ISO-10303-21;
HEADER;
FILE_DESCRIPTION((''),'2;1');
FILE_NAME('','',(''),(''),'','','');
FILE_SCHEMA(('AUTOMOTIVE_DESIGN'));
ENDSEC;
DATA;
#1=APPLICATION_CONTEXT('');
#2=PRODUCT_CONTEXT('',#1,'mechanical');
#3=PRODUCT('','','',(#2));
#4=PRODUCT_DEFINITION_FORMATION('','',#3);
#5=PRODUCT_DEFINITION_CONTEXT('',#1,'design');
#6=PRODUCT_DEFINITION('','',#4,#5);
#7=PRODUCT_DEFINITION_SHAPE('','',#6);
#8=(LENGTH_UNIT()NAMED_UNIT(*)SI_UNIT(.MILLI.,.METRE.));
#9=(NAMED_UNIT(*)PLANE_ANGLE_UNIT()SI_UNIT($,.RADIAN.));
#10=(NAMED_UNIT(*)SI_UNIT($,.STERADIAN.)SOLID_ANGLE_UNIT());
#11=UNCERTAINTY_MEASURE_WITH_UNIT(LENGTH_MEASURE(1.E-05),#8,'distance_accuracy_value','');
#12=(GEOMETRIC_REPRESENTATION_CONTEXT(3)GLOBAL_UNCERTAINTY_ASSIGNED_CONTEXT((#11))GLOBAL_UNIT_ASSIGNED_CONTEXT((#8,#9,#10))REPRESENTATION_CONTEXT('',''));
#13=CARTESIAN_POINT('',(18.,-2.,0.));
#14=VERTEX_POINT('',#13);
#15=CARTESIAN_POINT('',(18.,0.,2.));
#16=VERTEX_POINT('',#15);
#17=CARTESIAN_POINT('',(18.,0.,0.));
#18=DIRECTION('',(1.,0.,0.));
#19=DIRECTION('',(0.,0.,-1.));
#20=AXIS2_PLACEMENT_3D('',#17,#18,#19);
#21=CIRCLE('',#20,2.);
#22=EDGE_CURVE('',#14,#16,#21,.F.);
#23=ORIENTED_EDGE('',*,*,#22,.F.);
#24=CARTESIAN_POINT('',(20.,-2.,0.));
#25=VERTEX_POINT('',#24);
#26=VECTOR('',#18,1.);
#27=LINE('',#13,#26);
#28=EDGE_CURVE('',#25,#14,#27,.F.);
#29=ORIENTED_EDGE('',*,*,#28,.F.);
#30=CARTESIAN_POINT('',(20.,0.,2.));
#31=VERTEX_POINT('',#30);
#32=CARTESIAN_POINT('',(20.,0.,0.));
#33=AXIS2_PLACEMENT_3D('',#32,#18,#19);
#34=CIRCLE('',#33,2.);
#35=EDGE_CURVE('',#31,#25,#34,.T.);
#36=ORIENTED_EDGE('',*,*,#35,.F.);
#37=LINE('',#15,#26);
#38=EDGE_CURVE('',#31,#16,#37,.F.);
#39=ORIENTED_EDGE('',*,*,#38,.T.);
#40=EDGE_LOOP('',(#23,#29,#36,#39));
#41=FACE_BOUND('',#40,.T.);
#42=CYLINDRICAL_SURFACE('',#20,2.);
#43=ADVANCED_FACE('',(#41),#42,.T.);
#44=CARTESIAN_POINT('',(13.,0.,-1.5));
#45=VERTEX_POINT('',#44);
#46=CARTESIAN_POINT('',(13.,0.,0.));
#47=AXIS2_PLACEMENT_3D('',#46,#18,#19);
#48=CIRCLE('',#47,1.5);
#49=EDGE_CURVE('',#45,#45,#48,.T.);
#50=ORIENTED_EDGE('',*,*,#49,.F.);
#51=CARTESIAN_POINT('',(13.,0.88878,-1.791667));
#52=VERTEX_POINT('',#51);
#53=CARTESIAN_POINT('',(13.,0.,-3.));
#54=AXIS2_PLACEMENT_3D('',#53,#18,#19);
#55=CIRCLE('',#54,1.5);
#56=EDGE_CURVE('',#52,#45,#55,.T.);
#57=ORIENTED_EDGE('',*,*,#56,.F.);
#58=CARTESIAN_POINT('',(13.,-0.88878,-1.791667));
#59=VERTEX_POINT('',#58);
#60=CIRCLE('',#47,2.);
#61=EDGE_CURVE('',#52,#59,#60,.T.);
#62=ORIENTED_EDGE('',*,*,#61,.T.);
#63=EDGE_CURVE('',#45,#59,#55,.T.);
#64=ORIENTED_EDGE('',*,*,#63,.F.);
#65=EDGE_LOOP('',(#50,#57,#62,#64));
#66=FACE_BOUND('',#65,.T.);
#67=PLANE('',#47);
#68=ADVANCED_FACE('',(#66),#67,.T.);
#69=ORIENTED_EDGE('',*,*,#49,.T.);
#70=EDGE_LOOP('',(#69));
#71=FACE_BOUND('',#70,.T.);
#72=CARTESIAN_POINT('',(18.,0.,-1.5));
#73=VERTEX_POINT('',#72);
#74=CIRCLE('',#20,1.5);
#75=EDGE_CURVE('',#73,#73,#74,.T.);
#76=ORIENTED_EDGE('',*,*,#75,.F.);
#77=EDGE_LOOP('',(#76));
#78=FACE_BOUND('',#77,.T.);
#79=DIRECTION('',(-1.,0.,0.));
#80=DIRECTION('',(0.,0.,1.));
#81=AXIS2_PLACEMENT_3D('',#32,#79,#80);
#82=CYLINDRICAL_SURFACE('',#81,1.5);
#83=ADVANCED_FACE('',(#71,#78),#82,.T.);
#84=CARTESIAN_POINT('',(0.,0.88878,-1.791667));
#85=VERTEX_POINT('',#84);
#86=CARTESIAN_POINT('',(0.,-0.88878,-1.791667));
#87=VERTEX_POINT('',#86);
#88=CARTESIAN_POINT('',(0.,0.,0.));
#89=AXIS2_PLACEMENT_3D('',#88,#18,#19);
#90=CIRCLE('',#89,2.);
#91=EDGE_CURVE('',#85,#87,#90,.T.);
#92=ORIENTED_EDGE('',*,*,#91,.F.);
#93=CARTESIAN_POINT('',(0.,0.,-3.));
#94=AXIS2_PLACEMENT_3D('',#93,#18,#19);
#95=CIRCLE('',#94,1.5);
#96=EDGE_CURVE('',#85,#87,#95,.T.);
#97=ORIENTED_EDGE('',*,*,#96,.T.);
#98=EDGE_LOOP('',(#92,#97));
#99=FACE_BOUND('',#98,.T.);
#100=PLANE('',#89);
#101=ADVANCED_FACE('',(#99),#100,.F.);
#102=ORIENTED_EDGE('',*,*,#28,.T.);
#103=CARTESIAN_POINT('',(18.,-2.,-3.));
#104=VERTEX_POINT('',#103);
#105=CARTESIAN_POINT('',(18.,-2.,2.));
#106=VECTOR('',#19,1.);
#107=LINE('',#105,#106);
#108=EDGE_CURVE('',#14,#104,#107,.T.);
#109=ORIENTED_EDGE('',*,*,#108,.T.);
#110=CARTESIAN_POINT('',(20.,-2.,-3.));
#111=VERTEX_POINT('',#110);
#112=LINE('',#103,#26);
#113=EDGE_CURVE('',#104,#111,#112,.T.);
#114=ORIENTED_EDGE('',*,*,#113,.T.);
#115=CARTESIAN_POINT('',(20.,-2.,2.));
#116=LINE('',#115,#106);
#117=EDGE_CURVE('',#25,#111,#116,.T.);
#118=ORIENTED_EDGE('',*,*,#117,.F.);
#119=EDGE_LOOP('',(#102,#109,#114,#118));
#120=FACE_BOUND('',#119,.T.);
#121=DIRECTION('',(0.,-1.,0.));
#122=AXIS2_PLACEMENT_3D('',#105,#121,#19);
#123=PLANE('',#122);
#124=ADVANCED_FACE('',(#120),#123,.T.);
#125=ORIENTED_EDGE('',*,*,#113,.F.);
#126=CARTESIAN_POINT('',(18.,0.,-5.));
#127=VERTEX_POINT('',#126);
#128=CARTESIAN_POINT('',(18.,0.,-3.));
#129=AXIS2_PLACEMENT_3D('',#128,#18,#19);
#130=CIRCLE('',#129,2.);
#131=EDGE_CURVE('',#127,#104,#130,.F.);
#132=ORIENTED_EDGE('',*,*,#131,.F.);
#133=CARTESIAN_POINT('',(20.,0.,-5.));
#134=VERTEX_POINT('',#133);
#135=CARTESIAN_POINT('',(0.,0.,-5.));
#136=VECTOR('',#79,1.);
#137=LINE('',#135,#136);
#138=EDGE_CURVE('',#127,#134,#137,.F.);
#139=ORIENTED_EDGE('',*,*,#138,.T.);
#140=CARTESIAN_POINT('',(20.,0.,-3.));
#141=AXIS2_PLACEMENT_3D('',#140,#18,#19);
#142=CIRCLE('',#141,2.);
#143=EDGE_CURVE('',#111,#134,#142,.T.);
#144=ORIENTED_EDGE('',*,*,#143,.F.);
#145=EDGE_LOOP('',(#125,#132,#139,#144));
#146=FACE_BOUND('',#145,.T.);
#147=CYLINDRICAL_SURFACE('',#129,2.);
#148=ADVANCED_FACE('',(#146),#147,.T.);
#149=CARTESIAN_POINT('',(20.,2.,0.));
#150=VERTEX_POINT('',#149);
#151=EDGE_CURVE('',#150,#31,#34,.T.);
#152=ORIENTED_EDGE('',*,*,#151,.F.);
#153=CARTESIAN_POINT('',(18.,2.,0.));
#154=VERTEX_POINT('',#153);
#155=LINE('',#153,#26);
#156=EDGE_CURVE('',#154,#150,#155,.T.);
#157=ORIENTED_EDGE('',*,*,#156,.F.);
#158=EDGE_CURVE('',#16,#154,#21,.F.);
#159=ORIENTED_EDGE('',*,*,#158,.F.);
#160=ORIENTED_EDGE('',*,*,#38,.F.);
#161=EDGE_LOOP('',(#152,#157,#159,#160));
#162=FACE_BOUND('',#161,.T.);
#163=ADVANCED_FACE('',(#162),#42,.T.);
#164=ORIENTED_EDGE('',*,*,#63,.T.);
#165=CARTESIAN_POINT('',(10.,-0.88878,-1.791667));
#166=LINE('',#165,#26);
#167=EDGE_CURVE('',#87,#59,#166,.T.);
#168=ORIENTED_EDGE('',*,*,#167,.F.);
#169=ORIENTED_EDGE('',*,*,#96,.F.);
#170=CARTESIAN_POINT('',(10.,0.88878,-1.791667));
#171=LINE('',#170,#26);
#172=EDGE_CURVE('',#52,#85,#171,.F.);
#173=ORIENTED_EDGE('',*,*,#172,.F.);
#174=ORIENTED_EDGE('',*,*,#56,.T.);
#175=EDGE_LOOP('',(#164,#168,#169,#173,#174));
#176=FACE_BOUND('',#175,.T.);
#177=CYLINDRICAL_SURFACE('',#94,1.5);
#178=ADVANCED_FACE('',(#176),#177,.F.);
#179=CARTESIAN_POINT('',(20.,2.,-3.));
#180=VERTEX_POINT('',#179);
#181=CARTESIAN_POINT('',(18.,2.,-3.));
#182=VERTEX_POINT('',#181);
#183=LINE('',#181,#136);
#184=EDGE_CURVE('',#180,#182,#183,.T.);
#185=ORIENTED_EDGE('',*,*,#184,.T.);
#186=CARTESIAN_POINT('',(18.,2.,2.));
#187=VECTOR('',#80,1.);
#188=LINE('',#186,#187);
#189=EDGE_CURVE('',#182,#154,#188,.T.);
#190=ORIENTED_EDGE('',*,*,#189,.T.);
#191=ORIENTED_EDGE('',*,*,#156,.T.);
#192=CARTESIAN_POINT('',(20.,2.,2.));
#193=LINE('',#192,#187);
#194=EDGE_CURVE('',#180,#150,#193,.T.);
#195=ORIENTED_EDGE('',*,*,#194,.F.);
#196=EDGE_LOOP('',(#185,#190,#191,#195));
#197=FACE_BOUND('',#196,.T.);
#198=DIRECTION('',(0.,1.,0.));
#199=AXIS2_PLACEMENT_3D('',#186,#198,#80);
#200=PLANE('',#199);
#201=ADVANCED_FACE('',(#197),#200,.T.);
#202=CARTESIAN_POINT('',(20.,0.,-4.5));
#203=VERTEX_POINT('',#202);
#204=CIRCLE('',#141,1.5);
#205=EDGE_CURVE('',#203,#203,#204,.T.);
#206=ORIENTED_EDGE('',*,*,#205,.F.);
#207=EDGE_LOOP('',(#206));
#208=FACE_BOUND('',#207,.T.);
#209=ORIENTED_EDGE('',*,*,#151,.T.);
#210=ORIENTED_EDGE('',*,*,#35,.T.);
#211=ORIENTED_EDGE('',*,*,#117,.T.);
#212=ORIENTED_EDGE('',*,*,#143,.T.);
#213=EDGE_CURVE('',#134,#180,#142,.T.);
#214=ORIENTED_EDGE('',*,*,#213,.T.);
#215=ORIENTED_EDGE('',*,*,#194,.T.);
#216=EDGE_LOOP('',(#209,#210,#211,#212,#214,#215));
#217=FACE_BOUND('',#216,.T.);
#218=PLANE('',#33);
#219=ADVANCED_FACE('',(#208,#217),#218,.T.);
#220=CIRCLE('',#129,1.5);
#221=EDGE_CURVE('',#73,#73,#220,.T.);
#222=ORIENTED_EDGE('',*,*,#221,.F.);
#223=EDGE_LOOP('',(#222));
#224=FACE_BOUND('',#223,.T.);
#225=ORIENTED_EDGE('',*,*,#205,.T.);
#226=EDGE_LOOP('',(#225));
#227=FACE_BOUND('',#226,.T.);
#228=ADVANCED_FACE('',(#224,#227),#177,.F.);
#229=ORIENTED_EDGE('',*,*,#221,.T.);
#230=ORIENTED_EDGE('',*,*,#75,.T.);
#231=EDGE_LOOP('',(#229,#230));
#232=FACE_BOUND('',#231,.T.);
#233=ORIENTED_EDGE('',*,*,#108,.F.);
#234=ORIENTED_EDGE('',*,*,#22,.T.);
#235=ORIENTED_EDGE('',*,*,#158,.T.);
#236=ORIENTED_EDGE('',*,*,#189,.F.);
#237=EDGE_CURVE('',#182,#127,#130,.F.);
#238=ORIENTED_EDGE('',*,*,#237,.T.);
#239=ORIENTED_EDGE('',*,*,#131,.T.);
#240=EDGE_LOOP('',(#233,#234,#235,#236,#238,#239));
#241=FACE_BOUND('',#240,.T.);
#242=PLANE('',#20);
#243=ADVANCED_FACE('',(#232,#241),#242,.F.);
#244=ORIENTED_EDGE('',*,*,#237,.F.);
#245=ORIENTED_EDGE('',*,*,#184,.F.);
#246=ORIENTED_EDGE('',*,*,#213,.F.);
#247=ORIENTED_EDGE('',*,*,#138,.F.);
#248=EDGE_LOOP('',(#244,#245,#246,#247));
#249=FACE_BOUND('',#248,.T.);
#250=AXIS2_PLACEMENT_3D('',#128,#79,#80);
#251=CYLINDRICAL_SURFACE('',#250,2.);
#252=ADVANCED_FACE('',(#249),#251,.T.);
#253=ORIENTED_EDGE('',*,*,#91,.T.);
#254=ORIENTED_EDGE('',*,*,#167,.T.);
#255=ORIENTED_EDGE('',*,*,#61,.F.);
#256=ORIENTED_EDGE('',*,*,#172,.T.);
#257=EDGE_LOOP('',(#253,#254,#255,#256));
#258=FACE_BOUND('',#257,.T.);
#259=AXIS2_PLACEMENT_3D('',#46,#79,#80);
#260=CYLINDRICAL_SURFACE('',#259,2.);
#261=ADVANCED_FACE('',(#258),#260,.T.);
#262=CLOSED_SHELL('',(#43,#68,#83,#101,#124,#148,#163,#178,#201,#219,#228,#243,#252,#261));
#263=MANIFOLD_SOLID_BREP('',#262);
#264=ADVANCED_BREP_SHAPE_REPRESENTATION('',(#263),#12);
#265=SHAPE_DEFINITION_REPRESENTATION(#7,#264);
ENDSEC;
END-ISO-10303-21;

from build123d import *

# Parameters (mm, degrees)
SKETCH2_R           = 2
BOSS_EXTRUDE1_DEPTH = 13
SKETCH3_R           = 1.5
BOSS_EXTRUDE2_DEPTH = 7
SKETCH4_W           = 3.988125856
SKETCH4_H           = 4
BOSS_EXTRUDE3_DEPTH = 2
SKETCH5_W           = 2
SKETCH5_H           = 4
BOSS_EXTRUDE4_DEPTH = 7
FILLET1_R           = 2
FILLET2_R           = 2
FILLET3_R           = 2
SKETCH6_R           = 1.5
CUT_EXTRUDE1_DEPTH  = 21.712315177


with BuildPart() as part:
    # Sketch2 → Boss-Extrude1 (new body)
    with BuildSketch(Plane(origin=(0, 0, 0), x_dir=(0, 0, -1), z_dir=(1, 0, 0))):
        Circle(SKETCH2_R)
    extrude(amount=BOSS_EXTRUDE1_DEPTH)

    # Sketch3 → Boss-Extrude2 (add)
    with BuildSketch(Plane(origin=(13, 0, 0), x_dir=(0, 0, -1), z_dir=(1, 0, 0))):
        Circle(SKETCH3_R)
    extrude(amount=BOSS_EXTRUDE2_DEPTH)

    # Sketch4 → Boss-Extrude3 (add)
    with BuildSketch(Plane(origin=(20, 0, 0), x_dir=(0, 0, -1), z_dir=(1, 0, 0))):
        with Locations((-0.005937072, 0)):
            Rectangle(SKETCH4_W, SKETCH4_H)
    extrude(amount=-BOSS_EXTRUDE3_DEPTH)

    # Sketch5 → Boss-Extrude4 (add)
    with BuildSketch(Plane.XY.offset(2)):
        with Locations((19, 0)):
            Rectangle(SKETCH5_W, SKETCH5_H)
    extrude(amount=-BOSS_EXTRUDE4_DEPTH)

    # Fillet1
    fillet1_edges = [part.edges().sort_by_distance(p)[0] for p in [
        (19, 2, 2),
    ]]
    fillet(fillet1_edges, radius=FILLET1_R)

    # Fillet2
    fillet2_edges = [part.edges().sort_by_distance(p)[0] for p in [
        (19, -2, 2),
    ]]
    fillet(fillet2_edges, radius=FILLET2_R - 0.0001)  # a hair under: the kernel refuses the full size

    # Fillet3
    fillet3_edges = [part.edges().sort_by_distance(p)[0] for p in [
        (19, -2, -5),
        (19, 2, -5),
    ]]
    fillet(fillet3_edges, radius=FILLET3_R - 0.0001)  # a hair under: the kernel refuses the full size

    # Sketch6 → Cut-Extrude1 (cut, through all)
    with BuildSketch(Plane(origin=(20, 0, 0), x_dir=(0, 0, -1), z_dir=(1, 0, 0))):
        with Locations((3, 0)):
            Circle(SKETCH6_R)
    extrude(amount=-CUT_EXTRUDE1_DEPTH, mode=Mode.SUBTRACT)


solid = part.part
